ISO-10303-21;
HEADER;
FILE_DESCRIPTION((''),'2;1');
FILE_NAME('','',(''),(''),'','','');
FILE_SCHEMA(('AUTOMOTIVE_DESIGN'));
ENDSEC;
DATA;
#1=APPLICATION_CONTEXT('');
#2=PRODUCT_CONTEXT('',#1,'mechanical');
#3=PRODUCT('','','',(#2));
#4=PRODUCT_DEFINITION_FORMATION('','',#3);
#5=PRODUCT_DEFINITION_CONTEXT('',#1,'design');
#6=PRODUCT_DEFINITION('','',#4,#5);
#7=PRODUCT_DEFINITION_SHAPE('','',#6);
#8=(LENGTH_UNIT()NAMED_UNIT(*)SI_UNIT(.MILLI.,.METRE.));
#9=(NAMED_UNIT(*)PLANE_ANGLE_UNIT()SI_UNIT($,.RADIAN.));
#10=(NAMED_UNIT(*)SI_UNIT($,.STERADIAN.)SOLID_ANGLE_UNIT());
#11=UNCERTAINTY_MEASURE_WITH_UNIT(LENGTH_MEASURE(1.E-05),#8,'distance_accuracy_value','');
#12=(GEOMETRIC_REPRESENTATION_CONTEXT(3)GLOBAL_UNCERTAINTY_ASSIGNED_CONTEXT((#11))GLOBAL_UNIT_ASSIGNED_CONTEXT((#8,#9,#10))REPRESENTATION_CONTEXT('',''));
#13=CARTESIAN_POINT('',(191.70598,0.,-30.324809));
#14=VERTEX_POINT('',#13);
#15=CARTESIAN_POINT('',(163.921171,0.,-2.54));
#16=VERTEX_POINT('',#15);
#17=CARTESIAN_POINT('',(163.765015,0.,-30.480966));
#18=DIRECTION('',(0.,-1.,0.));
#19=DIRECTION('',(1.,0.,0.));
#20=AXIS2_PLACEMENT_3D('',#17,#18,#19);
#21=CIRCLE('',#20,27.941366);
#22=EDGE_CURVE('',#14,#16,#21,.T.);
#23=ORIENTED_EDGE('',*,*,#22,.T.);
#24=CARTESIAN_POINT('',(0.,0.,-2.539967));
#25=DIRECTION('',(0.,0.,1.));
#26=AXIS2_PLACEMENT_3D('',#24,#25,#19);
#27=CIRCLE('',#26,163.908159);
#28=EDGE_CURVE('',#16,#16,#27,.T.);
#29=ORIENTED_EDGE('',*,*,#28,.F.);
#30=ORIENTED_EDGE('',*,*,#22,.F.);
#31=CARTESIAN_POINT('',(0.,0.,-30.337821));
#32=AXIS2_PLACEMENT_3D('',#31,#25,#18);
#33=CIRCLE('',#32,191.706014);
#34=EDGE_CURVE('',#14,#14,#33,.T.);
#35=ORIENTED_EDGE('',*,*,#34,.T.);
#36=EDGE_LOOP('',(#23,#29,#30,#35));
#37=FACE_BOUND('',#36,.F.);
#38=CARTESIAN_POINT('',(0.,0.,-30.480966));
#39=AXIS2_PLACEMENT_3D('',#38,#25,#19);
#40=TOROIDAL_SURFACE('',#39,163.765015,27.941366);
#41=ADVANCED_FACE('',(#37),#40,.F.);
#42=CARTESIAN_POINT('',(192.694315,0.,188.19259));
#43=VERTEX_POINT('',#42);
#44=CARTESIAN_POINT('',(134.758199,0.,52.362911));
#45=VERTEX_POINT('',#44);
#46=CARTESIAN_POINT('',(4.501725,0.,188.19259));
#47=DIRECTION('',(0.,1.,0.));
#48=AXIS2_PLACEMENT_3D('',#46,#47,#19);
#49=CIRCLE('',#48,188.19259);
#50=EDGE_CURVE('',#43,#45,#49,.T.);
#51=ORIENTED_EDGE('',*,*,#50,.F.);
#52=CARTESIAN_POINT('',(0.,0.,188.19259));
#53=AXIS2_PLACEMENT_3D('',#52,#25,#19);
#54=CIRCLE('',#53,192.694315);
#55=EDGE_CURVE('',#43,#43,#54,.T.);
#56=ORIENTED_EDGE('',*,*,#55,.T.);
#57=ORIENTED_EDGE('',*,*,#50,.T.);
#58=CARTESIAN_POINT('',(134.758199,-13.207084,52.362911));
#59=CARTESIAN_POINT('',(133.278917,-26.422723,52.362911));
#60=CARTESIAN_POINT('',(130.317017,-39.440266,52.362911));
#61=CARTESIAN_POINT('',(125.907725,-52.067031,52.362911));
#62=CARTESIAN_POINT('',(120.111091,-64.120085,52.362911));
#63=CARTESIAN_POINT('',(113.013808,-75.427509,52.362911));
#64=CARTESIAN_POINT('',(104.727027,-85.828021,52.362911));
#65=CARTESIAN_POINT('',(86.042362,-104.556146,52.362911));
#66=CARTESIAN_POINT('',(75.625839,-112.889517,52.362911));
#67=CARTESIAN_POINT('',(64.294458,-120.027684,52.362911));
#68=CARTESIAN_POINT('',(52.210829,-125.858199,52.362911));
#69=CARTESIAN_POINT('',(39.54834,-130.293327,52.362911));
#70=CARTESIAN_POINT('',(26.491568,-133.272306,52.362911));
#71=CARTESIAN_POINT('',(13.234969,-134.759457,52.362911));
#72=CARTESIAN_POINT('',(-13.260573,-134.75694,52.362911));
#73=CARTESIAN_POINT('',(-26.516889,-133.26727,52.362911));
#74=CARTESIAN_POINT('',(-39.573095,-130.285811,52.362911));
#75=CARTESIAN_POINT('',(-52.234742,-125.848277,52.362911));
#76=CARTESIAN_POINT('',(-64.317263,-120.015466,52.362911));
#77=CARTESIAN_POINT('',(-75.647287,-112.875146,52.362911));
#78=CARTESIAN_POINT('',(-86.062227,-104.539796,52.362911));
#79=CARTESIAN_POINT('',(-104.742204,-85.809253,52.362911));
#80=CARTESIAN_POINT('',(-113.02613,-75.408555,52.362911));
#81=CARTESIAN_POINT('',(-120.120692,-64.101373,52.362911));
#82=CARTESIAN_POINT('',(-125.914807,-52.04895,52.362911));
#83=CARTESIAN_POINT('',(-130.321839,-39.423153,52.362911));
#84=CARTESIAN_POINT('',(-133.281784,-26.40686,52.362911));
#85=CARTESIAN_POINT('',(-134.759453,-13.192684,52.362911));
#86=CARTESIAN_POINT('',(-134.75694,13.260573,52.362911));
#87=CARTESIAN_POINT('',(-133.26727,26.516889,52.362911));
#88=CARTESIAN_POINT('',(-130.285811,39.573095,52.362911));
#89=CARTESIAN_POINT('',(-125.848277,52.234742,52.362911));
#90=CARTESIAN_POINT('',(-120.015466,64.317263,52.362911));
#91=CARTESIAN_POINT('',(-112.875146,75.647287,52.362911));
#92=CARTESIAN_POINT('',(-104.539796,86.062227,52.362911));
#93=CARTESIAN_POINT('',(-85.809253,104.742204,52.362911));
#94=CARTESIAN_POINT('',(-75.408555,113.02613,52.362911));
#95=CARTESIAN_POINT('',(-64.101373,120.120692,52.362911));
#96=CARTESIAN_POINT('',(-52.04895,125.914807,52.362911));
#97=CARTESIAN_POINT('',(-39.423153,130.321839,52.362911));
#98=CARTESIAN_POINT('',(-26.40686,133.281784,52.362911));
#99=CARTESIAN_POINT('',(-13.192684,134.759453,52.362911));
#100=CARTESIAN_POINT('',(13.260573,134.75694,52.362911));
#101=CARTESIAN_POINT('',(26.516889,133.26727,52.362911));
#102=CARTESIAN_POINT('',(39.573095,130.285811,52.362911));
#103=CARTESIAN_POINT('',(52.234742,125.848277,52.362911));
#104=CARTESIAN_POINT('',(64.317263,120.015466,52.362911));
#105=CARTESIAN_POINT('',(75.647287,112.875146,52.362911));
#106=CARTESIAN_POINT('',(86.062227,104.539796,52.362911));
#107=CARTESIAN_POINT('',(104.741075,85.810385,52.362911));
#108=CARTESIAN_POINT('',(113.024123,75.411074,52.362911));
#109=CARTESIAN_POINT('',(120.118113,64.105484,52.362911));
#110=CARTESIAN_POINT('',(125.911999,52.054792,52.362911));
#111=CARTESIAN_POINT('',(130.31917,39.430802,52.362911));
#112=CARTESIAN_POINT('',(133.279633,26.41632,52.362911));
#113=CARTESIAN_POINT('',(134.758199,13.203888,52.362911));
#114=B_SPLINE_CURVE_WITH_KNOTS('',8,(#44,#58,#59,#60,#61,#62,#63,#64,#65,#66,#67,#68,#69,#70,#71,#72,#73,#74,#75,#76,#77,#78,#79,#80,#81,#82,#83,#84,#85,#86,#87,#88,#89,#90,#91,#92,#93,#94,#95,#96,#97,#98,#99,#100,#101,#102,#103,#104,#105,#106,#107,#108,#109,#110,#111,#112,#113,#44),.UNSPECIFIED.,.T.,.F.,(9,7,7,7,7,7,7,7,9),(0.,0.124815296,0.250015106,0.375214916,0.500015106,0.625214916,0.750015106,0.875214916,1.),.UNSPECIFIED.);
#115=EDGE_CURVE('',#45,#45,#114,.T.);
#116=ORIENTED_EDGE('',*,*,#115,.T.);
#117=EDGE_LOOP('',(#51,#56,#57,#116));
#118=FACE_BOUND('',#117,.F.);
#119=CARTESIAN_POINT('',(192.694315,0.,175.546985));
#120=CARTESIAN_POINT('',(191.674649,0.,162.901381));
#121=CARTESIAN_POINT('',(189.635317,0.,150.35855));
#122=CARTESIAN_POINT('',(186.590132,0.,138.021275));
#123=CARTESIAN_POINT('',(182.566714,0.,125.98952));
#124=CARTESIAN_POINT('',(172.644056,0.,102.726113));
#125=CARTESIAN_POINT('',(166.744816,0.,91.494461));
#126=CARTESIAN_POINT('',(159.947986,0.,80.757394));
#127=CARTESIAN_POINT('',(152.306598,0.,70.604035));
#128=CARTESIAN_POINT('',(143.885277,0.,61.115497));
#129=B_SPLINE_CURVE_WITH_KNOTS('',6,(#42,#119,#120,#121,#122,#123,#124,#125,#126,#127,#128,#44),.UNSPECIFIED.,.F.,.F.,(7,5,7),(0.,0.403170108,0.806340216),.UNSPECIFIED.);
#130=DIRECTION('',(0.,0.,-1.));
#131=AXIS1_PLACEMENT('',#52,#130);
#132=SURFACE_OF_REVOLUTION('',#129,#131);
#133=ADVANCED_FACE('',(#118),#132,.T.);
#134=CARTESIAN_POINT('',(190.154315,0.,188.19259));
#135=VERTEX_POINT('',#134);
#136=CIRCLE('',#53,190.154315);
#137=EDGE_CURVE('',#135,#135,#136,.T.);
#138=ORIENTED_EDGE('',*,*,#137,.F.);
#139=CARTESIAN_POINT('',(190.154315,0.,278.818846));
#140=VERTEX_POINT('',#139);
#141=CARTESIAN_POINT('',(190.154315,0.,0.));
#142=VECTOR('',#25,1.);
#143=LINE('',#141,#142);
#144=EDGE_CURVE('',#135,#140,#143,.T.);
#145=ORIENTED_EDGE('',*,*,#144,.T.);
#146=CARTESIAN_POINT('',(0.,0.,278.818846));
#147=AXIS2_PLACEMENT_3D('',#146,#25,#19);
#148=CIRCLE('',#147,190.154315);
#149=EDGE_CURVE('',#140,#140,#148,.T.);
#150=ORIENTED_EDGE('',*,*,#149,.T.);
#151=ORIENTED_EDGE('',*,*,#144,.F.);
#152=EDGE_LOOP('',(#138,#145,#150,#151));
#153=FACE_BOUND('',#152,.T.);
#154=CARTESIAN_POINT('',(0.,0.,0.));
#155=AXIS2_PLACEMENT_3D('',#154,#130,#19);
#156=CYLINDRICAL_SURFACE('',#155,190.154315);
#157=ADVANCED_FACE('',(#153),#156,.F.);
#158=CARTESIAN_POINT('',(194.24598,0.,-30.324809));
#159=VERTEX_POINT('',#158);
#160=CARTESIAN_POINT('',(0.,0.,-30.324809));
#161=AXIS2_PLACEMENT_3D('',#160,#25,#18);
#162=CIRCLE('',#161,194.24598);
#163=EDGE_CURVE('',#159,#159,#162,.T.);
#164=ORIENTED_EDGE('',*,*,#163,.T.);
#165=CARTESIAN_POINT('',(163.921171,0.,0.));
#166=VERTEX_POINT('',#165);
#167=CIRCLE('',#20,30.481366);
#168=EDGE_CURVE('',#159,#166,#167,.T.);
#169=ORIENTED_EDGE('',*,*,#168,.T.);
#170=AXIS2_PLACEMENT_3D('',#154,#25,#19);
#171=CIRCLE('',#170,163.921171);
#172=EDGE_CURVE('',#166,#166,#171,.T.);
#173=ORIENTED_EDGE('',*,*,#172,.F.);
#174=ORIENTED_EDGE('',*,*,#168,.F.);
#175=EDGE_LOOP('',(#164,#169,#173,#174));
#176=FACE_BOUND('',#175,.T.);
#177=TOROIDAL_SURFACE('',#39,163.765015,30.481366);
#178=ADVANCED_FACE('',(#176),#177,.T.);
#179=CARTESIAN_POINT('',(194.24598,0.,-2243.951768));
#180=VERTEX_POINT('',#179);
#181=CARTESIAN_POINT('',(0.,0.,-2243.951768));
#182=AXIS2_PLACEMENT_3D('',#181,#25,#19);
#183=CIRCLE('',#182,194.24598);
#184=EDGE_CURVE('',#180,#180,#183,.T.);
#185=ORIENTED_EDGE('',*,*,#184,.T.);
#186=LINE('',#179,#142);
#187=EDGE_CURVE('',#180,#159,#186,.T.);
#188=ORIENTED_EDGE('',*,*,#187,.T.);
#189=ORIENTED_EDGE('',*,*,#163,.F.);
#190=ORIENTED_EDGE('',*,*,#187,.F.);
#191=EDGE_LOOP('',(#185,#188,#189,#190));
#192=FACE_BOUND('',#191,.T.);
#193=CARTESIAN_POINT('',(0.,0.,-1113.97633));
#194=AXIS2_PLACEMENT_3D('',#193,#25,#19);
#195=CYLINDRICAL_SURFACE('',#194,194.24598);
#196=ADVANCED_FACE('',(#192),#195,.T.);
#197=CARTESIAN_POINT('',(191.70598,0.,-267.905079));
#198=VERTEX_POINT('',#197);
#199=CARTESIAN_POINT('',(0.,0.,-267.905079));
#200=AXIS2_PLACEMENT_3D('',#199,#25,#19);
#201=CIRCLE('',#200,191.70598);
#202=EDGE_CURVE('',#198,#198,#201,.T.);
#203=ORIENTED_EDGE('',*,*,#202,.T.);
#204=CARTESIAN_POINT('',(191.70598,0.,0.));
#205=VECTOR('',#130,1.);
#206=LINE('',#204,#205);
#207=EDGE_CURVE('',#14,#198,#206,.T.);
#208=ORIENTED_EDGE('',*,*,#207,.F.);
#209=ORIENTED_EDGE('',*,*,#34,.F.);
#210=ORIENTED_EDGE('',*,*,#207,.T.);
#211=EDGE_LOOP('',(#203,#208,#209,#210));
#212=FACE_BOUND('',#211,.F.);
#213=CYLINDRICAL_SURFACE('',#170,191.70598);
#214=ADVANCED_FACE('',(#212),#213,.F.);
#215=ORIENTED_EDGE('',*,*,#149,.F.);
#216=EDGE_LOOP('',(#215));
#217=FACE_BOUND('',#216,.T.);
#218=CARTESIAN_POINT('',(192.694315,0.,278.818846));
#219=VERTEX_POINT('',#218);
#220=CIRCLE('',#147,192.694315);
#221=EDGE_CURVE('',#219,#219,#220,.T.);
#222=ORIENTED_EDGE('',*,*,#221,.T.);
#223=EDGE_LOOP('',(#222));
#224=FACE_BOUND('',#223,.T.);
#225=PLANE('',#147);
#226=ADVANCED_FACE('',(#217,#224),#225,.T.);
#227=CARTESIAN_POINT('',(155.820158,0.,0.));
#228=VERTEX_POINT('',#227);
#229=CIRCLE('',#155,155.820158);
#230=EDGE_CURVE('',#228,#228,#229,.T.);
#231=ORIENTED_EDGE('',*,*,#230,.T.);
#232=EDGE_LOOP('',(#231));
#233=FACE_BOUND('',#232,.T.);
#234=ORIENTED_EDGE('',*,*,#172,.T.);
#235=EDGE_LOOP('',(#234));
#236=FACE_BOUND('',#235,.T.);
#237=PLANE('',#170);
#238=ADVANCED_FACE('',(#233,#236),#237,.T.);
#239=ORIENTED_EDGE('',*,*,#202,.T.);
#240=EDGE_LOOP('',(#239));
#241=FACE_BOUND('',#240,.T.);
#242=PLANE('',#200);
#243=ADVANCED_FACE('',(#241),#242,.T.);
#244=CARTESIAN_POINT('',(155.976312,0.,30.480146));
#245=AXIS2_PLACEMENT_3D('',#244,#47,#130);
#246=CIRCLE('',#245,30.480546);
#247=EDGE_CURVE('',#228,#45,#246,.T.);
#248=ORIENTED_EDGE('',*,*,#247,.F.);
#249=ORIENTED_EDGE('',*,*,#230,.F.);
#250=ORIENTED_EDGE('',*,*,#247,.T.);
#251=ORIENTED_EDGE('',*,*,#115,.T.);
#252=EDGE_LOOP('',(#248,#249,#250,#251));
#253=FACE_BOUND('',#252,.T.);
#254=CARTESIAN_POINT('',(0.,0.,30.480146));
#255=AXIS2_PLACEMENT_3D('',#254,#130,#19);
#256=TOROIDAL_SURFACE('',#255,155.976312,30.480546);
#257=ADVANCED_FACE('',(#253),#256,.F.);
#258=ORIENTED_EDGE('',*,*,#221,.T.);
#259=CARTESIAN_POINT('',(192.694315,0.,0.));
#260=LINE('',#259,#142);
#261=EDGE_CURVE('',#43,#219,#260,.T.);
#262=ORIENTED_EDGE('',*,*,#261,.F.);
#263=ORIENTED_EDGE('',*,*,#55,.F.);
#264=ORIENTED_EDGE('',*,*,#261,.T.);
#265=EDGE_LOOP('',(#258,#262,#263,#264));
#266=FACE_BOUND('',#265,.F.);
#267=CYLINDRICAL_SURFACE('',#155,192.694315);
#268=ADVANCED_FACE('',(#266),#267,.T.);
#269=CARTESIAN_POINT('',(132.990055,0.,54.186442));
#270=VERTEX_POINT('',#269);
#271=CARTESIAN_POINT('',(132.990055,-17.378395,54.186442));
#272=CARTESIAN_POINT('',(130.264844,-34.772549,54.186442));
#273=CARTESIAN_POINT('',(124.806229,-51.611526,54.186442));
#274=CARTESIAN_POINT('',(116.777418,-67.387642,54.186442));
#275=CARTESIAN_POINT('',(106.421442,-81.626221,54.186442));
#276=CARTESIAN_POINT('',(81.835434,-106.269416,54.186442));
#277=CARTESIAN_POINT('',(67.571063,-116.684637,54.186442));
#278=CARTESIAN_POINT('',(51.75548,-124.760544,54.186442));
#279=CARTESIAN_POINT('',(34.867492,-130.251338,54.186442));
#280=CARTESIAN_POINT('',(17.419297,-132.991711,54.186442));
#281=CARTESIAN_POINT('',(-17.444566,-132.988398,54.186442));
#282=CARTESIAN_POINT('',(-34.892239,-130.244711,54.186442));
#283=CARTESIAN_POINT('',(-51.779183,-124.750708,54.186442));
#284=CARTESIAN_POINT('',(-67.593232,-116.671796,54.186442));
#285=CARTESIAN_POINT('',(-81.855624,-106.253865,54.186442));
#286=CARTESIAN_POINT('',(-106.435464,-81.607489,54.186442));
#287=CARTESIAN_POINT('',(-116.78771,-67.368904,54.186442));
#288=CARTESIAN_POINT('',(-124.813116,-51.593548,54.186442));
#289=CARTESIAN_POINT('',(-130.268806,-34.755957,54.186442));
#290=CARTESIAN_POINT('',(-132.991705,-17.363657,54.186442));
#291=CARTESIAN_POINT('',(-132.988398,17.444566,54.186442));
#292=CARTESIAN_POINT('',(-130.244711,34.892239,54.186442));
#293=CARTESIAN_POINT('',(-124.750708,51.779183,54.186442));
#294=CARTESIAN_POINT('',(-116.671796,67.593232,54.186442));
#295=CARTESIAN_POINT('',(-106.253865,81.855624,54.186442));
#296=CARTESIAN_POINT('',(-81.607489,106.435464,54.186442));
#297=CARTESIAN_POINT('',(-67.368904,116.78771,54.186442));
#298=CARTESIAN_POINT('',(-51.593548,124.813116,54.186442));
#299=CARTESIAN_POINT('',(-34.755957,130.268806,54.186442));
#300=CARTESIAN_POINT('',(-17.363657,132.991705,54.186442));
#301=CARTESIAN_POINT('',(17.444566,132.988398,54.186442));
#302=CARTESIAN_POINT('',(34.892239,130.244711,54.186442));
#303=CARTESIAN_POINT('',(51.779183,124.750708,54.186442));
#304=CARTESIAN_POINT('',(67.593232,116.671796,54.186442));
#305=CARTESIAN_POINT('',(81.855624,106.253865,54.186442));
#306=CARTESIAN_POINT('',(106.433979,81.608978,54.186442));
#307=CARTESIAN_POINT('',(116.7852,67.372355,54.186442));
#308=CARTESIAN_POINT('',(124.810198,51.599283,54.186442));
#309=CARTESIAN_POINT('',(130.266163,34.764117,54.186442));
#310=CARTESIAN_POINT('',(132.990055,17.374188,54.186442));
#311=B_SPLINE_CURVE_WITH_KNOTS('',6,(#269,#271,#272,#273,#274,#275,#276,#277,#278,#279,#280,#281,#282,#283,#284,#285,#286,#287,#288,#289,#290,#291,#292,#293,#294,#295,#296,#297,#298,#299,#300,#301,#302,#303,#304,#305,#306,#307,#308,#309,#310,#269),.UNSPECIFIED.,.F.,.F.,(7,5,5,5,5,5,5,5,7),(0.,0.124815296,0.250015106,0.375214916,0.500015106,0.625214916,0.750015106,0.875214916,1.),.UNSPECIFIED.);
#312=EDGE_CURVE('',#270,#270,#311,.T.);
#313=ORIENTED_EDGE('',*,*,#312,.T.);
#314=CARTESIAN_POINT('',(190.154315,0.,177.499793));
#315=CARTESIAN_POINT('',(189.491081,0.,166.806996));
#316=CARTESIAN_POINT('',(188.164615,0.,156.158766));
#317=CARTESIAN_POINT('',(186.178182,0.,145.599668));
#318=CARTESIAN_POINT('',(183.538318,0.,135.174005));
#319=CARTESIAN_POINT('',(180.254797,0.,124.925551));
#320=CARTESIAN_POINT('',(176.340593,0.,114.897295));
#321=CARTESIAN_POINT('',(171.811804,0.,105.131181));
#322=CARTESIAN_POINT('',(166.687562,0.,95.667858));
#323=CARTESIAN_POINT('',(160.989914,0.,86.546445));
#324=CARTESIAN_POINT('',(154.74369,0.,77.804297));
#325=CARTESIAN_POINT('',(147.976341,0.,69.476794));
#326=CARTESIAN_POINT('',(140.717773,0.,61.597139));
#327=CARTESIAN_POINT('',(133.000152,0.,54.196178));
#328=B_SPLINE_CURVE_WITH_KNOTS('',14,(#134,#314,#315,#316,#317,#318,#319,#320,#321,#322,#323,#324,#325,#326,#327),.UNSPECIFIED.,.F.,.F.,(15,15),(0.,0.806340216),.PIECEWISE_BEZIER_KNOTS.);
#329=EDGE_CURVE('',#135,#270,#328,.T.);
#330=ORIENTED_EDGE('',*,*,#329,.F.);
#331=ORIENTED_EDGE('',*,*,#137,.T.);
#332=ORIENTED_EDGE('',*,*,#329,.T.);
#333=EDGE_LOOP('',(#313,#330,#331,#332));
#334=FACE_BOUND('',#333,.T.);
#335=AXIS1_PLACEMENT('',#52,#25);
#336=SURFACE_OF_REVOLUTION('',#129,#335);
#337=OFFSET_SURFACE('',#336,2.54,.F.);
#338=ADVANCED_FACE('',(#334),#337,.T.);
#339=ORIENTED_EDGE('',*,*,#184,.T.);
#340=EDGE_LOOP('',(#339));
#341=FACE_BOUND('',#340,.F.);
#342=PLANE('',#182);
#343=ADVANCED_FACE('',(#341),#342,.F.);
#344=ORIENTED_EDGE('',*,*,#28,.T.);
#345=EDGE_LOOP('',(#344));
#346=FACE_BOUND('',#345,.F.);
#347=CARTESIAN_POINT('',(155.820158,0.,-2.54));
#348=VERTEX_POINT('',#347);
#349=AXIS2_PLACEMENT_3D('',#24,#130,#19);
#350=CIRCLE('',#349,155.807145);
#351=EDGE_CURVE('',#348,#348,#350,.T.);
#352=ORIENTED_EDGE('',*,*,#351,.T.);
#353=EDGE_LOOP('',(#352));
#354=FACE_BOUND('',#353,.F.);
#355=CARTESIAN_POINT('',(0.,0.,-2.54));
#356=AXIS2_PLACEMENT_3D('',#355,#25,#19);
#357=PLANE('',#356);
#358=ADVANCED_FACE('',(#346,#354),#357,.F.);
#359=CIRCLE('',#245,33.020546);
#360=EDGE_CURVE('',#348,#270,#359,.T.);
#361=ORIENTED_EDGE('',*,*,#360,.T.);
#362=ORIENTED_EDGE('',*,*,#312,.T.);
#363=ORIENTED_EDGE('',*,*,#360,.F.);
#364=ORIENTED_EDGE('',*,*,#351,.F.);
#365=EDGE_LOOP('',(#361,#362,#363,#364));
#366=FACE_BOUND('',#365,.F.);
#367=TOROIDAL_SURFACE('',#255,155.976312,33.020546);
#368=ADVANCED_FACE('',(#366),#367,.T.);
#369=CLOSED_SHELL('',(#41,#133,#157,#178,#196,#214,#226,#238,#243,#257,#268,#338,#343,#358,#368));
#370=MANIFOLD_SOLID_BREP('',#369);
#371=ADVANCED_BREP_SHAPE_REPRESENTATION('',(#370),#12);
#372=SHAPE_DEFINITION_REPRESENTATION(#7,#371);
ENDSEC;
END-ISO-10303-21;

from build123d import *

# Parameters (mm, degrees)
F0_R     = 192.6943149474
F1_DEPTH = 278.8188457489
F2_R     = 188.1925897504
F3_R     = 194.2459802586
F4_DEPTH = 270.4450786114
F6_T     = -2.54
F7_DEPTH = 843.5312509537
F8_DEPTH = 1129.975438118


# Not quite as in the source:
# - a fillet or chamfer that OpenCascade refuses, or shapes differently, is made with other operations: its cross-section is extruded or revolved along the edge and cut away or added


with BuildPart() as f1:
    # F0 (on Top) → F1 (new body)
    with BuildSketch(Plane.XY):
        Circle(F0_R)
    extrude(amount=F1_DEPTH)

    # F2
    f2_edges = [f1.edges().sort_by_distance(p)[0] for p in [
        (-192.694315, 0, 0),
    ]]
    fillet(f2_edges, radius=F2_R)

    # F3 (on Top) → F4 (join)
    with BuildSketch(Plane.XY):
        Circle(F3_R)
    extrude(amount=-F4_DEPTH)

    # F5: fillet of radius 30.48 on 2 edges, made by hand

    # F5_s1 → F5_t2 (revolve)
    with BuildSketch(Plane.XZ):
        with BuildLine():
            ThreePointArc((155.9763121834, -0.0004), (127.6997450573, 19.1003639784), (134.862440304, 52.4635057638))
            Line((134.862440304, 52.4635057638), (132.7510531161, 54.6618417328))
            ThreePointArc((132.7510531161, 54.6618417328), (75.136788898, 14.3228364086), (4.501725197, 3.0480546074))
            Line((4.501725197, 3.0480546074), (4.501725197, -3.0480546074))
            ThreePointArc((4.501725197, -3.0480546074), (80.2390186902, -3.0480546074), (155.9763121834, -3.0484546074))
            Line((155.9763121834, -3.0484546074), (155.9763121834, -0.0004))
        make_face()
    revolve(axis=Axis((0, 0, 0), (0, 0, 1)))

    # F5_s3 → F5_t4 (revolve, cut)
    with BuildSketch(Plane.XZ):
        with BuildLine():
            ThreePointArc((194.2463802586, -30.4809656854), (185.3185949492, -8.9273853094), (163.7650145732, 0.0004))
            Line((163.7650145732, 0.0004), (163.7650145732, 3.0485365685))
            ThreePointArc((163.7650145732, 3.0485365685), (179.0054974159, 3.0481365685), (194.2459802586, 3.0481365685))
            Line((194.2459802586, 3.0481365685), (197.2941168272, 0))
            ThreePointArc((197.2941168272, 0), (197.2941168272, -15.2404828427), (197.2945168272, -30.4809656854))
            Line((197.2945168272, -30.4809656854), (194.2463802586, -30.4809656854))
        make_face()
    revolve(axis=Axis((0, 0, 0), (0, 0, 1)), mode=Mode.SUBTRACT)

    # F6
    f6_openings = [f1.faces().sort_by_distance(p)[0] for p in [
        (0, 0, 278.818846),
    ]]
    offset(amount=F6_T, openings=f6_openings)

    # F7 (add): a face of the model
    f7_faces = [f1.faces().sort_by_distance(p)[0] for p in [
        (0, 0, -270.4450786114),
    ]]
    extrude(f7_faces, amount=F7_DEPTH)

    # F8 (add): a face of the model
    f8_faces = [f1.faces().sort_by_distance(p)[0] for p in [
        (0, 0, -1113.976329565),
    ]]
    extrude(f8_faces, amount=F8_DEPTH)


solid = f1.part
